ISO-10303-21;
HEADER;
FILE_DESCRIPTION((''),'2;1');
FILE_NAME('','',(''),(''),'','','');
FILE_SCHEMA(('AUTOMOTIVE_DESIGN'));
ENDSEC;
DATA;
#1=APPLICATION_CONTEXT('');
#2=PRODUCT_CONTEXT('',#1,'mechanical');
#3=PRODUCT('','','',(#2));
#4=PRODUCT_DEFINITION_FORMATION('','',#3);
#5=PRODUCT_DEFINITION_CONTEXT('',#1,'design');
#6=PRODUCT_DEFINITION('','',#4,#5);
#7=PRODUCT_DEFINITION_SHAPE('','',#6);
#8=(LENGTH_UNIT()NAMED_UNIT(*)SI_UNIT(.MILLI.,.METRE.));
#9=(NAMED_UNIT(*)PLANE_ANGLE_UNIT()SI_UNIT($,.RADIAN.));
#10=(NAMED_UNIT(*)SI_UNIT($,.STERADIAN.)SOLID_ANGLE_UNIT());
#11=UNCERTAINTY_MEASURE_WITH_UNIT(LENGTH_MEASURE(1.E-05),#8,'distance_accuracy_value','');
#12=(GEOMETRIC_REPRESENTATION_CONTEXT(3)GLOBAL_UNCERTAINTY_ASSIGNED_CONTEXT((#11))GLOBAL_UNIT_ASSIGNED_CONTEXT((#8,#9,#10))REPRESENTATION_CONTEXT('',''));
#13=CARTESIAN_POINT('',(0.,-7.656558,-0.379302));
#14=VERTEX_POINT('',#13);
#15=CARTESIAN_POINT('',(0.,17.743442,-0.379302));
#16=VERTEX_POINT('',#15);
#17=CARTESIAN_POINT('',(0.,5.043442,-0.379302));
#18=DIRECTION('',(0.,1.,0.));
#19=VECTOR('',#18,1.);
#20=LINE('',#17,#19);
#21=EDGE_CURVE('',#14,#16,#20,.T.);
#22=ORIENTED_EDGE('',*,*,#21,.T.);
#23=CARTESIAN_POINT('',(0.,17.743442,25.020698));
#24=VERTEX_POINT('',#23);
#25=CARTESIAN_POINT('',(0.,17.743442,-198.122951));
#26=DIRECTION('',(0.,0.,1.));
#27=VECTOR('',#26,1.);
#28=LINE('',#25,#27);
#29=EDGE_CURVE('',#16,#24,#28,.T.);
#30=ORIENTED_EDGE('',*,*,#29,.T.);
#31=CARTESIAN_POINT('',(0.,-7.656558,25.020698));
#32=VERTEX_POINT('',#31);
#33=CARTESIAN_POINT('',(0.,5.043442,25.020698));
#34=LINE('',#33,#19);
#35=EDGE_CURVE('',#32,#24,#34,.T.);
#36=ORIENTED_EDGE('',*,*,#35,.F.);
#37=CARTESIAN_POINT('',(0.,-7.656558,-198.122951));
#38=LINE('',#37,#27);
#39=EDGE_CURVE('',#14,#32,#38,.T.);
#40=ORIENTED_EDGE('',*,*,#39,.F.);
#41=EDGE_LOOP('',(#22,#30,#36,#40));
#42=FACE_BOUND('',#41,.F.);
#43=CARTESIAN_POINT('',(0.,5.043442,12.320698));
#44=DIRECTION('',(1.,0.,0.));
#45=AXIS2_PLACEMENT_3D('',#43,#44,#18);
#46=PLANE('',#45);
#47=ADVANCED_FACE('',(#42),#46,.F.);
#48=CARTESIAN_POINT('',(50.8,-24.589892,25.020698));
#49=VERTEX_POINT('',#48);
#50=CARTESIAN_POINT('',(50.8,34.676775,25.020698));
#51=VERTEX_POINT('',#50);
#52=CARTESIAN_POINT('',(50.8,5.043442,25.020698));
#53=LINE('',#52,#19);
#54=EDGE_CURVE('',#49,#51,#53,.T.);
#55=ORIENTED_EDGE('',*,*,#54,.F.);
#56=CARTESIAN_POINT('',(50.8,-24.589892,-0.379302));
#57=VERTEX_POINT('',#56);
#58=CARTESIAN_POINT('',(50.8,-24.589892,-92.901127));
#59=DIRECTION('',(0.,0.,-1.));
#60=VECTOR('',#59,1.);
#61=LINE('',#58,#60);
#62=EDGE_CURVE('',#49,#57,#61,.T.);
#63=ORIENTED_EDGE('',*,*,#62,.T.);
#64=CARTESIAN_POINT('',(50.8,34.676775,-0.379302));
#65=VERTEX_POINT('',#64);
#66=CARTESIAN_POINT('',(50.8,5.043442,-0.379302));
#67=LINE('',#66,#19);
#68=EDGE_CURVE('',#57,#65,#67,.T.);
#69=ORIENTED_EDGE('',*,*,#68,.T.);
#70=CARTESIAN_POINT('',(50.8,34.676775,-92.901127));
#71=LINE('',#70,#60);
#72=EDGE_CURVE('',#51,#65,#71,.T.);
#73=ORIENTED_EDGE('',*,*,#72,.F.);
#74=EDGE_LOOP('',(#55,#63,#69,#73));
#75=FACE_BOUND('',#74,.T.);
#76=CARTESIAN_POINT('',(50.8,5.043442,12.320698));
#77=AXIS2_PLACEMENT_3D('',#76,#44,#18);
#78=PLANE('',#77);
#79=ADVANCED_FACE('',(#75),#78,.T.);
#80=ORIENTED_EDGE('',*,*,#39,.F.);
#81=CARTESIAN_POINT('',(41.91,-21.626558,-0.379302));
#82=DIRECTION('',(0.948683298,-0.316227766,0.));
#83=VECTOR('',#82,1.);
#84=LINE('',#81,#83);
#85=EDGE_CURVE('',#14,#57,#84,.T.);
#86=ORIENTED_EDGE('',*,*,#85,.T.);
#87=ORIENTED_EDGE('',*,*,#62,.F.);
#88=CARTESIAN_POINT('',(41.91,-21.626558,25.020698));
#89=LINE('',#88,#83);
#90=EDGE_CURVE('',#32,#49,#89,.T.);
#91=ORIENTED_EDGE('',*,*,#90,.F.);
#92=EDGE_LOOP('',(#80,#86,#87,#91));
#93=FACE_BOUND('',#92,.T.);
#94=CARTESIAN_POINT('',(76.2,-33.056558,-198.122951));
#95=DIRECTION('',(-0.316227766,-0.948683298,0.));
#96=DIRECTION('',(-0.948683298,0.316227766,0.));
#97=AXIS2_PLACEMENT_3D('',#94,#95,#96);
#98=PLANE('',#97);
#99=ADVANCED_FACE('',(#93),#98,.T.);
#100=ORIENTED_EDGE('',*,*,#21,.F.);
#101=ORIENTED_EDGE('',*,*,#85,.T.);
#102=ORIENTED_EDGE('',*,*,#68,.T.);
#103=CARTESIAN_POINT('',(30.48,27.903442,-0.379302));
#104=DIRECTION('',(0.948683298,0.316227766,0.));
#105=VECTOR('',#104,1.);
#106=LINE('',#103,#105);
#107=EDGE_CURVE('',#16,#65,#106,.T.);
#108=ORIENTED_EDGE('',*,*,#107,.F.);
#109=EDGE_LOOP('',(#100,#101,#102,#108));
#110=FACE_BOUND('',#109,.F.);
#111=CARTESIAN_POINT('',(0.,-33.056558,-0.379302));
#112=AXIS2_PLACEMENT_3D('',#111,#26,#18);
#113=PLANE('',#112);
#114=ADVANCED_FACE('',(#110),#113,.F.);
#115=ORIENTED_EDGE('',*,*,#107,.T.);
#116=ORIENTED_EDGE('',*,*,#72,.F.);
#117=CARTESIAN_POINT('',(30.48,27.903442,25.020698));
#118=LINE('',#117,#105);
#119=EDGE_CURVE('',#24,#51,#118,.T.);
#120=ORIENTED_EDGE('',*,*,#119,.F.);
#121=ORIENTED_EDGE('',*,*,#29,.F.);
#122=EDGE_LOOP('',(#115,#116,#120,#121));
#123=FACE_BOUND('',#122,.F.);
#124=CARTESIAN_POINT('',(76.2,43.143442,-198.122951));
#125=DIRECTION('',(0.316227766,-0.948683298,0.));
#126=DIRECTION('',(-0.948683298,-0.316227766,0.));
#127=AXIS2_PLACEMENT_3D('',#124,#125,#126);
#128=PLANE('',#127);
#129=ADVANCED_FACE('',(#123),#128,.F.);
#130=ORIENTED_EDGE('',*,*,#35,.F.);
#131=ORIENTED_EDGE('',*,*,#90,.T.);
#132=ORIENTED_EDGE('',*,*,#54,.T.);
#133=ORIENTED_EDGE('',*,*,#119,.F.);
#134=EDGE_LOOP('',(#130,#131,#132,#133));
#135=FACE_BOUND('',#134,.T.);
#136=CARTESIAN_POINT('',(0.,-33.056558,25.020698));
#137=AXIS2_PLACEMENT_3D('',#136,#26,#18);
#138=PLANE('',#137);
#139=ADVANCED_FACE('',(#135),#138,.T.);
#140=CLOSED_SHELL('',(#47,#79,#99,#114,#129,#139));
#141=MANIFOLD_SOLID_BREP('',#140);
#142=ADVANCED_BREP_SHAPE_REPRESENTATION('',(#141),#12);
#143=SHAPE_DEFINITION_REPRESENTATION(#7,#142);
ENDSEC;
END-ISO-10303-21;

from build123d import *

# Parameters (mm, degrees)
F0_W        = 76.2
F0_H        = 25.4
F1_DEPTH    = 50.8
F2_T1_DEPTH = 420.8872980239


# Not quite as in the source:
# - a fillet or chamfer that OpenCascade refuses, or shapes differently, is made with other operations: its cross-section is extruded or revolved along the edge and cut away or added


with BuildPart() as f1:
    # F0 (on Right) → F1 (new body)
    with BuildSketch(Plane.YZ):
        with Locations((5.0434416714, 12.3206977732)):
            Rectangle(F0_W, F0_H)
    extrude(amount=F1_DEPTH)

    # F2: chamfer of 76.2 x 25.4 on 2 edges, made by hand

    # F2_s2 → F2_t1 (cut)
    with BuildSketch(Plane.XY.offset(-198.1229512387)):
        Polygon((76.2, -33.0565583286), (0, -7.6565583286), (0, -33.0565583286), align=None)
        Polygon((76.2, 43.1434416714), (0, 17.7434416714), (0, 43.1434416714), align=None)
    extrude(amount=F2_T1_DEPTH, mode=Mode.SUBTRACT)


solid = f1.part
